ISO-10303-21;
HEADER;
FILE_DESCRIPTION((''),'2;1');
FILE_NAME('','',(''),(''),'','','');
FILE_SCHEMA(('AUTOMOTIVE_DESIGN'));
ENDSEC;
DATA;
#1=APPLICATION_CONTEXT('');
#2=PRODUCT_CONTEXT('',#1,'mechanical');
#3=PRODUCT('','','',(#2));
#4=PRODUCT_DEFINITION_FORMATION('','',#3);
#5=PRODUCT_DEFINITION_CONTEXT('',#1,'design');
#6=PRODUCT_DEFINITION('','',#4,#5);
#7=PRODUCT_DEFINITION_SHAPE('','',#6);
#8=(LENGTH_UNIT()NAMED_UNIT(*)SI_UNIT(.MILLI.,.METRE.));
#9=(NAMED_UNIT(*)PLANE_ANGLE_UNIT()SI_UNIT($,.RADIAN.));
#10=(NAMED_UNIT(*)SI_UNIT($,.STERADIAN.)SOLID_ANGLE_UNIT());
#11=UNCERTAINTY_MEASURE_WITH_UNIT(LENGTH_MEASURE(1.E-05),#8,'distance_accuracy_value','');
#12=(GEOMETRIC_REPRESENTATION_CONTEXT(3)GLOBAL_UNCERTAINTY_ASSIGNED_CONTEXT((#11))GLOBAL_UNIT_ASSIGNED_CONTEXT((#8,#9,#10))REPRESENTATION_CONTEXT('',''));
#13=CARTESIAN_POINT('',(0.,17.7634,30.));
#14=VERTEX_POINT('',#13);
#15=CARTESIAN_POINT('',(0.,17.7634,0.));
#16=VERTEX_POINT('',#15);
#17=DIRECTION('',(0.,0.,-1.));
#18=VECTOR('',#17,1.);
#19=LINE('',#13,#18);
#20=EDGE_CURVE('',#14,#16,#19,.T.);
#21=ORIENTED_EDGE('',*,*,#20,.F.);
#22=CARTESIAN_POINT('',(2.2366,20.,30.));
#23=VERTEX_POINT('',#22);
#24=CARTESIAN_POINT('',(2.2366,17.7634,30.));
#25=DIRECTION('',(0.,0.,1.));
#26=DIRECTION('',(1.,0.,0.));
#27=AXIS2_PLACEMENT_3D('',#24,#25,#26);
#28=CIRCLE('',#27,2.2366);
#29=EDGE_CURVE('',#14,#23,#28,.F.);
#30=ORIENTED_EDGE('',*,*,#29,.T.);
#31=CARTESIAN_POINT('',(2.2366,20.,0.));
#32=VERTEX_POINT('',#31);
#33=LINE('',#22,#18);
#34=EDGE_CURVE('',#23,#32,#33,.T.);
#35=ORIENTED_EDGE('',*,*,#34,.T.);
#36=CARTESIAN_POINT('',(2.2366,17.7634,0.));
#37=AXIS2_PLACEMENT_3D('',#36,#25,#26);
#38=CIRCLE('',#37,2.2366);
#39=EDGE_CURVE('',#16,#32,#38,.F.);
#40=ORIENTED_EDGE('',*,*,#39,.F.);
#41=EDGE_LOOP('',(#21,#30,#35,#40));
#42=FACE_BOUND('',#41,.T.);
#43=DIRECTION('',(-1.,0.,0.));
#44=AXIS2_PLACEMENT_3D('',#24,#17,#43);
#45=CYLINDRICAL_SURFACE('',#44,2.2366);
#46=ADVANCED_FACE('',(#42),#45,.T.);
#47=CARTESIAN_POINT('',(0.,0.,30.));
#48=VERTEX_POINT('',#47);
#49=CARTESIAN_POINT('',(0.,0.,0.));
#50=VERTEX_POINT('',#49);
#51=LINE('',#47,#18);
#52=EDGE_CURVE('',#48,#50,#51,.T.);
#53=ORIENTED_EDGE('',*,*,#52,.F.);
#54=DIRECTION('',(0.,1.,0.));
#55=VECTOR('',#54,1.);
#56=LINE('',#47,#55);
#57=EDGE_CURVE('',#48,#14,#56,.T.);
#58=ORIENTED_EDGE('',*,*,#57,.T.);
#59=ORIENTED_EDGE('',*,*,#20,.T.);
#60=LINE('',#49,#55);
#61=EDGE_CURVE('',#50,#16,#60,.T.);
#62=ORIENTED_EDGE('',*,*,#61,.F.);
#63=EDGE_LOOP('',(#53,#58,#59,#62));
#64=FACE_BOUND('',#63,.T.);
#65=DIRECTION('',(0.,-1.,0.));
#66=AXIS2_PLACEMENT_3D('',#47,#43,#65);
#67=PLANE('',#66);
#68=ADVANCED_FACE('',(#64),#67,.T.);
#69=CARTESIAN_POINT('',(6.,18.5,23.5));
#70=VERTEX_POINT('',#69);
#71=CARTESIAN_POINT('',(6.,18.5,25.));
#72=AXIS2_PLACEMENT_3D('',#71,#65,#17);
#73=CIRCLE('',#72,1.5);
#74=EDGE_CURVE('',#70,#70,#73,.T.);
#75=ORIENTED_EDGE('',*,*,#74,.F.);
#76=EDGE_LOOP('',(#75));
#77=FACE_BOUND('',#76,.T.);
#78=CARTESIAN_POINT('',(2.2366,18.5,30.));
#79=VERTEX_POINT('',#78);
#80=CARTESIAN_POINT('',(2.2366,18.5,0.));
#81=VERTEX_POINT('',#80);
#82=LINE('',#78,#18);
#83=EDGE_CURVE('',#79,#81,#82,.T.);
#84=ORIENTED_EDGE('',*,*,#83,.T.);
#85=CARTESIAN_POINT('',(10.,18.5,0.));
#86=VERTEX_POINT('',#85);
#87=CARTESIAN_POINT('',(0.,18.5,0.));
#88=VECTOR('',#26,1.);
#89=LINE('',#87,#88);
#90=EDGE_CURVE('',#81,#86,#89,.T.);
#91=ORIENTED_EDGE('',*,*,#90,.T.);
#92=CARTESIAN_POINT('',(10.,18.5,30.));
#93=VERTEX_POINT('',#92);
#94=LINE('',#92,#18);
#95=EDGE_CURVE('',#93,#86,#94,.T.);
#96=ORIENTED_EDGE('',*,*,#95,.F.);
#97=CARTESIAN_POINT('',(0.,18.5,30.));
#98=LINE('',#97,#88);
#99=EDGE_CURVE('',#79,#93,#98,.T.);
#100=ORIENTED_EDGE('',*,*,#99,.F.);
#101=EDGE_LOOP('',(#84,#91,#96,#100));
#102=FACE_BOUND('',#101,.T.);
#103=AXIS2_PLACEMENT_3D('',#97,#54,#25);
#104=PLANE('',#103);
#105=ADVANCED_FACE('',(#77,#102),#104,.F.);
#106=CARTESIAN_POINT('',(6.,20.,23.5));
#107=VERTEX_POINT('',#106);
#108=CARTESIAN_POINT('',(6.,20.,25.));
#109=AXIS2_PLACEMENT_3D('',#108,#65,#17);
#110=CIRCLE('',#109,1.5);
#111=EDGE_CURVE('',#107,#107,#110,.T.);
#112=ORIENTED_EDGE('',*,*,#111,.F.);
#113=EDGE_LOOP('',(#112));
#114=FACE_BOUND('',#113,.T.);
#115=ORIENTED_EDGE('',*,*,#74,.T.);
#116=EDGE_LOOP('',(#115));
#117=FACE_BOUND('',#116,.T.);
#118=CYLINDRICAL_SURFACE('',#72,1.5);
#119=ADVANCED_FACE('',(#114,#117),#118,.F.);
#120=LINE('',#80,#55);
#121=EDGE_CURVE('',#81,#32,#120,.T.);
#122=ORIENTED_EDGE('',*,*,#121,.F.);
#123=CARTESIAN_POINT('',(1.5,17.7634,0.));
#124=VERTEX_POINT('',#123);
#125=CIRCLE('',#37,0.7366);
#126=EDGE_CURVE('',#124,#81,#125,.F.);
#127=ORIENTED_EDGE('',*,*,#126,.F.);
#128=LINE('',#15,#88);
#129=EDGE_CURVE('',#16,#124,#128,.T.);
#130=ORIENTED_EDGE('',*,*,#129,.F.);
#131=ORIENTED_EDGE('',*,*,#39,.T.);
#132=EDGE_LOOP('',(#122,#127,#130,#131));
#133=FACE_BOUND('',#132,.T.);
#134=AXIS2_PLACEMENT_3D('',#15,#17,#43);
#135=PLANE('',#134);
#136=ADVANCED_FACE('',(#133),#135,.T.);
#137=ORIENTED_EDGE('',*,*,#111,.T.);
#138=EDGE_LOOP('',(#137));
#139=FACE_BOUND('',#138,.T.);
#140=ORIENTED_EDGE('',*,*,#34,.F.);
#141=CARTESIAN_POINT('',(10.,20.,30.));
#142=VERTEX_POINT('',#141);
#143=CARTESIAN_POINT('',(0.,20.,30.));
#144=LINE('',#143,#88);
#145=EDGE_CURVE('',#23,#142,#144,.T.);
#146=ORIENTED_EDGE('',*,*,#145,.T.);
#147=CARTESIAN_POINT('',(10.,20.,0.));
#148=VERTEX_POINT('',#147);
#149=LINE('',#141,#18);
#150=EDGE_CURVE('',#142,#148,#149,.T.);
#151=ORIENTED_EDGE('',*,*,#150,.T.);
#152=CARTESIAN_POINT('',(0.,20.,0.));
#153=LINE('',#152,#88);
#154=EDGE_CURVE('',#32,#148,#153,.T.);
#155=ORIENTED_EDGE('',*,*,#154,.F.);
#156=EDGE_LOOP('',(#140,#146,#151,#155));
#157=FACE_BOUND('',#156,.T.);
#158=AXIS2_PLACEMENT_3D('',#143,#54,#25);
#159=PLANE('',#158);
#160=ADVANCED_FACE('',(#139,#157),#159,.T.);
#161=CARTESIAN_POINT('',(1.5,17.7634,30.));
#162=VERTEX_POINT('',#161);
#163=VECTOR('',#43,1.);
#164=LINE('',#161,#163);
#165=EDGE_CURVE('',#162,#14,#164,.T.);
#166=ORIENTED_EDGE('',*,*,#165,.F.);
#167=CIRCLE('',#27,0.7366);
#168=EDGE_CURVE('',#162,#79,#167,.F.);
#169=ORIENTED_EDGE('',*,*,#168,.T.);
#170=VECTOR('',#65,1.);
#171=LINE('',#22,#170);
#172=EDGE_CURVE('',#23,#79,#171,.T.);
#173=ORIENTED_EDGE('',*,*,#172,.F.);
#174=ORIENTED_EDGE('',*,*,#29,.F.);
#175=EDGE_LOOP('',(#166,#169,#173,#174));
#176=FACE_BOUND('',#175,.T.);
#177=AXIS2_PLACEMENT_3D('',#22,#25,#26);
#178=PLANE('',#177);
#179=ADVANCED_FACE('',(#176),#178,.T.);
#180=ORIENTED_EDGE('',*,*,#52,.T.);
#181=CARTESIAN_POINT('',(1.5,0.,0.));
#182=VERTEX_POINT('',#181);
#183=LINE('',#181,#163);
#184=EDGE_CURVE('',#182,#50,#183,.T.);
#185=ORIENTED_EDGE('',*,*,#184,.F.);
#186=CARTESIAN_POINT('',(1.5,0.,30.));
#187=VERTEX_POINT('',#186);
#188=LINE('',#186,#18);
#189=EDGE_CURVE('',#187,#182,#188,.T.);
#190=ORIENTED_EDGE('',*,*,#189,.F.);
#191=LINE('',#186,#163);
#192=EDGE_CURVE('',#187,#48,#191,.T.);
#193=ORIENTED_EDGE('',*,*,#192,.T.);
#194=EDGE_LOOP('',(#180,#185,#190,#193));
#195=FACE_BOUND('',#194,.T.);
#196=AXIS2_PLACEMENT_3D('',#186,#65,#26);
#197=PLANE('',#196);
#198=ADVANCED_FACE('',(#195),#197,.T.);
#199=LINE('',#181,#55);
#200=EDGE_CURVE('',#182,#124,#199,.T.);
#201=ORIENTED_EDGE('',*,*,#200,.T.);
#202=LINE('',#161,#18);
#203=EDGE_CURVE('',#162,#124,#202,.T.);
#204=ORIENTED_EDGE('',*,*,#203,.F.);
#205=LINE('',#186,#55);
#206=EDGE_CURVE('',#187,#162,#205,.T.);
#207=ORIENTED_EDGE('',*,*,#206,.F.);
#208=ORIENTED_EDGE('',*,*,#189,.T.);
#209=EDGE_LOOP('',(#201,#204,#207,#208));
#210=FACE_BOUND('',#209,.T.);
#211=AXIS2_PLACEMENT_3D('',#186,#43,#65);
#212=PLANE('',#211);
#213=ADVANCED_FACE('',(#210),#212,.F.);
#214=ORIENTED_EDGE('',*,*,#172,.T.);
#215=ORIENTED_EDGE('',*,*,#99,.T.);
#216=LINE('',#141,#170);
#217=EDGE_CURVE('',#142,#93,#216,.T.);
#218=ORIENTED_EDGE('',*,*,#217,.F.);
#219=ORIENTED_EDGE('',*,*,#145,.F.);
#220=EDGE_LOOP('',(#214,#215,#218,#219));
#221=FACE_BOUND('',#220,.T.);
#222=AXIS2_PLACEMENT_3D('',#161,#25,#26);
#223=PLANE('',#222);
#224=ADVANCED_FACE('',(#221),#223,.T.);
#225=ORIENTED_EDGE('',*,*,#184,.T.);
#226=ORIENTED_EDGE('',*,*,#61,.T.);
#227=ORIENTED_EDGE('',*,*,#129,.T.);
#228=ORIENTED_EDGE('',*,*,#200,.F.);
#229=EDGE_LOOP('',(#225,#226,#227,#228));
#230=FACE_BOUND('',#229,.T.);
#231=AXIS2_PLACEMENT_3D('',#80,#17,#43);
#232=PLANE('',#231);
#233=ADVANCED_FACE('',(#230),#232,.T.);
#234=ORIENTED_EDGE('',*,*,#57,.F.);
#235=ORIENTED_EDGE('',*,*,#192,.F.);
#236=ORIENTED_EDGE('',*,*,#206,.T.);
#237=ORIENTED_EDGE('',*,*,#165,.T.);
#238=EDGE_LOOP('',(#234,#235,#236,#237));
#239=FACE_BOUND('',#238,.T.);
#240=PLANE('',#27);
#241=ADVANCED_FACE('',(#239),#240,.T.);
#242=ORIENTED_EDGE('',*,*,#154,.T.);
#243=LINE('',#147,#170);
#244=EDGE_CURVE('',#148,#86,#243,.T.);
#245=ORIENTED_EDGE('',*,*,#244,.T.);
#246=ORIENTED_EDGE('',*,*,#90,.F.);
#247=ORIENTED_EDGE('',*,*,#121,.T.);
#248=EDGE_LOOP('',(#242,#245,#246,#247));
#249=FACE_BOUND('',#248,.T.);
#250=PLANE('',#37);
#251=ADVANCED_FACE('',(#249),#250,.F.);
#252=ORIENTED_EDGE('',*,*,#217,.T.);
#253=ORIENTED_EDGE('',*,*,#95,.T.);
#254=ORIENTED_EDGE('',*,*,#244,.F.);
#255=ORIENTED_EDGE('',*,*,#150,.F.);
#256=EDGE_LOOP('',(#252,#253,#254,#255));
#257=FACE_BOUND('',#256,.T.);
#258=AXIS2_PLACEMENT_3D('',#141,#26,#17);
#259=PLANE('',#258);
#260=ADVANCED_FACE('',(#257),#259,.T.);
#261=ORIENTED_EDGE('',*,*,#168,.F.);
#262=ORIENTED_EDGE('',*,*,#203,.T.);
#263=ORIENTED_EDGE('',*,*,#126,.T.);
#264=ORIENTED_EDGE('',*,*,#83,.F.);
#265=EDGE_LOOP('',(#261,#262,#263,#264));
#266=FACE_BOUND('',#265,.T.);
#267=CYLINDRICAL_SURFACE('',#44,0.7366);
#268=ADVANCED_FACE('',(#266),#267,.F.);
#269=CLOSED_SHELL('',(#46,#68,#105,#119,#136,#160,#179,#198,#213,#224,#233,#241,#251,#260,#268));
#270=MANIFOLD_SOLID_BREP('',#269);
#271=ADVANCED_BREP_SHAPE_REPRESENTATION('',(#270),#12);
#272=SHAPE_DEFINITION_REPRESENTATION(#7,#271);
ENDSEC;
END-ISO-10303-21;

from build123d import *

# Parameters (mm, degrees)
BASE_FLANGE1_DEPTH    = 30
F_3_0MM_DOWEL_HOLE1_D = 3


# Sheet-metal steps are written as plain solids
with BuildPart() as part:
    # Sketch1 → Base-Flange1 (new body)
    with BuildSketch(Plane.XY):
        with BuildLine():
            Line((0, 0), (0, 17.7634))
            ThreePointArc((0, 17.7634), (0.655084973, 19.344915027), (2.2366, 20))
            Line((2.2366, 20), (10, 20))
            Line((10, 20), (10, 18.5))
            Line((10, 18.5), (2.2366, 18.5))
            ThreePointArc((2.2366, 18.5), (1.715745145, 18.284254855), (1.5, 17.7634))
            Line((1.5, 17.7634), (1.5, 0))
            Line((1.5, 0), (0, 0))
        make_face()
    extrude(amount=BASE_FLANGE1_DEPTH)

    # Ø3.0mm Dowel Hole1 (through all)
    with Locations(Plane(origin=(5.118724392, 18.5, 37.745569698), x_dir=(-1, 0, 0), z_dir=(0, -1, 0))):
        with Locations((-0.881275608, 12.745569698)):
            Hole(F_3_0MM_DOWEL_HOLE1_D / 2)


solid = part.part
